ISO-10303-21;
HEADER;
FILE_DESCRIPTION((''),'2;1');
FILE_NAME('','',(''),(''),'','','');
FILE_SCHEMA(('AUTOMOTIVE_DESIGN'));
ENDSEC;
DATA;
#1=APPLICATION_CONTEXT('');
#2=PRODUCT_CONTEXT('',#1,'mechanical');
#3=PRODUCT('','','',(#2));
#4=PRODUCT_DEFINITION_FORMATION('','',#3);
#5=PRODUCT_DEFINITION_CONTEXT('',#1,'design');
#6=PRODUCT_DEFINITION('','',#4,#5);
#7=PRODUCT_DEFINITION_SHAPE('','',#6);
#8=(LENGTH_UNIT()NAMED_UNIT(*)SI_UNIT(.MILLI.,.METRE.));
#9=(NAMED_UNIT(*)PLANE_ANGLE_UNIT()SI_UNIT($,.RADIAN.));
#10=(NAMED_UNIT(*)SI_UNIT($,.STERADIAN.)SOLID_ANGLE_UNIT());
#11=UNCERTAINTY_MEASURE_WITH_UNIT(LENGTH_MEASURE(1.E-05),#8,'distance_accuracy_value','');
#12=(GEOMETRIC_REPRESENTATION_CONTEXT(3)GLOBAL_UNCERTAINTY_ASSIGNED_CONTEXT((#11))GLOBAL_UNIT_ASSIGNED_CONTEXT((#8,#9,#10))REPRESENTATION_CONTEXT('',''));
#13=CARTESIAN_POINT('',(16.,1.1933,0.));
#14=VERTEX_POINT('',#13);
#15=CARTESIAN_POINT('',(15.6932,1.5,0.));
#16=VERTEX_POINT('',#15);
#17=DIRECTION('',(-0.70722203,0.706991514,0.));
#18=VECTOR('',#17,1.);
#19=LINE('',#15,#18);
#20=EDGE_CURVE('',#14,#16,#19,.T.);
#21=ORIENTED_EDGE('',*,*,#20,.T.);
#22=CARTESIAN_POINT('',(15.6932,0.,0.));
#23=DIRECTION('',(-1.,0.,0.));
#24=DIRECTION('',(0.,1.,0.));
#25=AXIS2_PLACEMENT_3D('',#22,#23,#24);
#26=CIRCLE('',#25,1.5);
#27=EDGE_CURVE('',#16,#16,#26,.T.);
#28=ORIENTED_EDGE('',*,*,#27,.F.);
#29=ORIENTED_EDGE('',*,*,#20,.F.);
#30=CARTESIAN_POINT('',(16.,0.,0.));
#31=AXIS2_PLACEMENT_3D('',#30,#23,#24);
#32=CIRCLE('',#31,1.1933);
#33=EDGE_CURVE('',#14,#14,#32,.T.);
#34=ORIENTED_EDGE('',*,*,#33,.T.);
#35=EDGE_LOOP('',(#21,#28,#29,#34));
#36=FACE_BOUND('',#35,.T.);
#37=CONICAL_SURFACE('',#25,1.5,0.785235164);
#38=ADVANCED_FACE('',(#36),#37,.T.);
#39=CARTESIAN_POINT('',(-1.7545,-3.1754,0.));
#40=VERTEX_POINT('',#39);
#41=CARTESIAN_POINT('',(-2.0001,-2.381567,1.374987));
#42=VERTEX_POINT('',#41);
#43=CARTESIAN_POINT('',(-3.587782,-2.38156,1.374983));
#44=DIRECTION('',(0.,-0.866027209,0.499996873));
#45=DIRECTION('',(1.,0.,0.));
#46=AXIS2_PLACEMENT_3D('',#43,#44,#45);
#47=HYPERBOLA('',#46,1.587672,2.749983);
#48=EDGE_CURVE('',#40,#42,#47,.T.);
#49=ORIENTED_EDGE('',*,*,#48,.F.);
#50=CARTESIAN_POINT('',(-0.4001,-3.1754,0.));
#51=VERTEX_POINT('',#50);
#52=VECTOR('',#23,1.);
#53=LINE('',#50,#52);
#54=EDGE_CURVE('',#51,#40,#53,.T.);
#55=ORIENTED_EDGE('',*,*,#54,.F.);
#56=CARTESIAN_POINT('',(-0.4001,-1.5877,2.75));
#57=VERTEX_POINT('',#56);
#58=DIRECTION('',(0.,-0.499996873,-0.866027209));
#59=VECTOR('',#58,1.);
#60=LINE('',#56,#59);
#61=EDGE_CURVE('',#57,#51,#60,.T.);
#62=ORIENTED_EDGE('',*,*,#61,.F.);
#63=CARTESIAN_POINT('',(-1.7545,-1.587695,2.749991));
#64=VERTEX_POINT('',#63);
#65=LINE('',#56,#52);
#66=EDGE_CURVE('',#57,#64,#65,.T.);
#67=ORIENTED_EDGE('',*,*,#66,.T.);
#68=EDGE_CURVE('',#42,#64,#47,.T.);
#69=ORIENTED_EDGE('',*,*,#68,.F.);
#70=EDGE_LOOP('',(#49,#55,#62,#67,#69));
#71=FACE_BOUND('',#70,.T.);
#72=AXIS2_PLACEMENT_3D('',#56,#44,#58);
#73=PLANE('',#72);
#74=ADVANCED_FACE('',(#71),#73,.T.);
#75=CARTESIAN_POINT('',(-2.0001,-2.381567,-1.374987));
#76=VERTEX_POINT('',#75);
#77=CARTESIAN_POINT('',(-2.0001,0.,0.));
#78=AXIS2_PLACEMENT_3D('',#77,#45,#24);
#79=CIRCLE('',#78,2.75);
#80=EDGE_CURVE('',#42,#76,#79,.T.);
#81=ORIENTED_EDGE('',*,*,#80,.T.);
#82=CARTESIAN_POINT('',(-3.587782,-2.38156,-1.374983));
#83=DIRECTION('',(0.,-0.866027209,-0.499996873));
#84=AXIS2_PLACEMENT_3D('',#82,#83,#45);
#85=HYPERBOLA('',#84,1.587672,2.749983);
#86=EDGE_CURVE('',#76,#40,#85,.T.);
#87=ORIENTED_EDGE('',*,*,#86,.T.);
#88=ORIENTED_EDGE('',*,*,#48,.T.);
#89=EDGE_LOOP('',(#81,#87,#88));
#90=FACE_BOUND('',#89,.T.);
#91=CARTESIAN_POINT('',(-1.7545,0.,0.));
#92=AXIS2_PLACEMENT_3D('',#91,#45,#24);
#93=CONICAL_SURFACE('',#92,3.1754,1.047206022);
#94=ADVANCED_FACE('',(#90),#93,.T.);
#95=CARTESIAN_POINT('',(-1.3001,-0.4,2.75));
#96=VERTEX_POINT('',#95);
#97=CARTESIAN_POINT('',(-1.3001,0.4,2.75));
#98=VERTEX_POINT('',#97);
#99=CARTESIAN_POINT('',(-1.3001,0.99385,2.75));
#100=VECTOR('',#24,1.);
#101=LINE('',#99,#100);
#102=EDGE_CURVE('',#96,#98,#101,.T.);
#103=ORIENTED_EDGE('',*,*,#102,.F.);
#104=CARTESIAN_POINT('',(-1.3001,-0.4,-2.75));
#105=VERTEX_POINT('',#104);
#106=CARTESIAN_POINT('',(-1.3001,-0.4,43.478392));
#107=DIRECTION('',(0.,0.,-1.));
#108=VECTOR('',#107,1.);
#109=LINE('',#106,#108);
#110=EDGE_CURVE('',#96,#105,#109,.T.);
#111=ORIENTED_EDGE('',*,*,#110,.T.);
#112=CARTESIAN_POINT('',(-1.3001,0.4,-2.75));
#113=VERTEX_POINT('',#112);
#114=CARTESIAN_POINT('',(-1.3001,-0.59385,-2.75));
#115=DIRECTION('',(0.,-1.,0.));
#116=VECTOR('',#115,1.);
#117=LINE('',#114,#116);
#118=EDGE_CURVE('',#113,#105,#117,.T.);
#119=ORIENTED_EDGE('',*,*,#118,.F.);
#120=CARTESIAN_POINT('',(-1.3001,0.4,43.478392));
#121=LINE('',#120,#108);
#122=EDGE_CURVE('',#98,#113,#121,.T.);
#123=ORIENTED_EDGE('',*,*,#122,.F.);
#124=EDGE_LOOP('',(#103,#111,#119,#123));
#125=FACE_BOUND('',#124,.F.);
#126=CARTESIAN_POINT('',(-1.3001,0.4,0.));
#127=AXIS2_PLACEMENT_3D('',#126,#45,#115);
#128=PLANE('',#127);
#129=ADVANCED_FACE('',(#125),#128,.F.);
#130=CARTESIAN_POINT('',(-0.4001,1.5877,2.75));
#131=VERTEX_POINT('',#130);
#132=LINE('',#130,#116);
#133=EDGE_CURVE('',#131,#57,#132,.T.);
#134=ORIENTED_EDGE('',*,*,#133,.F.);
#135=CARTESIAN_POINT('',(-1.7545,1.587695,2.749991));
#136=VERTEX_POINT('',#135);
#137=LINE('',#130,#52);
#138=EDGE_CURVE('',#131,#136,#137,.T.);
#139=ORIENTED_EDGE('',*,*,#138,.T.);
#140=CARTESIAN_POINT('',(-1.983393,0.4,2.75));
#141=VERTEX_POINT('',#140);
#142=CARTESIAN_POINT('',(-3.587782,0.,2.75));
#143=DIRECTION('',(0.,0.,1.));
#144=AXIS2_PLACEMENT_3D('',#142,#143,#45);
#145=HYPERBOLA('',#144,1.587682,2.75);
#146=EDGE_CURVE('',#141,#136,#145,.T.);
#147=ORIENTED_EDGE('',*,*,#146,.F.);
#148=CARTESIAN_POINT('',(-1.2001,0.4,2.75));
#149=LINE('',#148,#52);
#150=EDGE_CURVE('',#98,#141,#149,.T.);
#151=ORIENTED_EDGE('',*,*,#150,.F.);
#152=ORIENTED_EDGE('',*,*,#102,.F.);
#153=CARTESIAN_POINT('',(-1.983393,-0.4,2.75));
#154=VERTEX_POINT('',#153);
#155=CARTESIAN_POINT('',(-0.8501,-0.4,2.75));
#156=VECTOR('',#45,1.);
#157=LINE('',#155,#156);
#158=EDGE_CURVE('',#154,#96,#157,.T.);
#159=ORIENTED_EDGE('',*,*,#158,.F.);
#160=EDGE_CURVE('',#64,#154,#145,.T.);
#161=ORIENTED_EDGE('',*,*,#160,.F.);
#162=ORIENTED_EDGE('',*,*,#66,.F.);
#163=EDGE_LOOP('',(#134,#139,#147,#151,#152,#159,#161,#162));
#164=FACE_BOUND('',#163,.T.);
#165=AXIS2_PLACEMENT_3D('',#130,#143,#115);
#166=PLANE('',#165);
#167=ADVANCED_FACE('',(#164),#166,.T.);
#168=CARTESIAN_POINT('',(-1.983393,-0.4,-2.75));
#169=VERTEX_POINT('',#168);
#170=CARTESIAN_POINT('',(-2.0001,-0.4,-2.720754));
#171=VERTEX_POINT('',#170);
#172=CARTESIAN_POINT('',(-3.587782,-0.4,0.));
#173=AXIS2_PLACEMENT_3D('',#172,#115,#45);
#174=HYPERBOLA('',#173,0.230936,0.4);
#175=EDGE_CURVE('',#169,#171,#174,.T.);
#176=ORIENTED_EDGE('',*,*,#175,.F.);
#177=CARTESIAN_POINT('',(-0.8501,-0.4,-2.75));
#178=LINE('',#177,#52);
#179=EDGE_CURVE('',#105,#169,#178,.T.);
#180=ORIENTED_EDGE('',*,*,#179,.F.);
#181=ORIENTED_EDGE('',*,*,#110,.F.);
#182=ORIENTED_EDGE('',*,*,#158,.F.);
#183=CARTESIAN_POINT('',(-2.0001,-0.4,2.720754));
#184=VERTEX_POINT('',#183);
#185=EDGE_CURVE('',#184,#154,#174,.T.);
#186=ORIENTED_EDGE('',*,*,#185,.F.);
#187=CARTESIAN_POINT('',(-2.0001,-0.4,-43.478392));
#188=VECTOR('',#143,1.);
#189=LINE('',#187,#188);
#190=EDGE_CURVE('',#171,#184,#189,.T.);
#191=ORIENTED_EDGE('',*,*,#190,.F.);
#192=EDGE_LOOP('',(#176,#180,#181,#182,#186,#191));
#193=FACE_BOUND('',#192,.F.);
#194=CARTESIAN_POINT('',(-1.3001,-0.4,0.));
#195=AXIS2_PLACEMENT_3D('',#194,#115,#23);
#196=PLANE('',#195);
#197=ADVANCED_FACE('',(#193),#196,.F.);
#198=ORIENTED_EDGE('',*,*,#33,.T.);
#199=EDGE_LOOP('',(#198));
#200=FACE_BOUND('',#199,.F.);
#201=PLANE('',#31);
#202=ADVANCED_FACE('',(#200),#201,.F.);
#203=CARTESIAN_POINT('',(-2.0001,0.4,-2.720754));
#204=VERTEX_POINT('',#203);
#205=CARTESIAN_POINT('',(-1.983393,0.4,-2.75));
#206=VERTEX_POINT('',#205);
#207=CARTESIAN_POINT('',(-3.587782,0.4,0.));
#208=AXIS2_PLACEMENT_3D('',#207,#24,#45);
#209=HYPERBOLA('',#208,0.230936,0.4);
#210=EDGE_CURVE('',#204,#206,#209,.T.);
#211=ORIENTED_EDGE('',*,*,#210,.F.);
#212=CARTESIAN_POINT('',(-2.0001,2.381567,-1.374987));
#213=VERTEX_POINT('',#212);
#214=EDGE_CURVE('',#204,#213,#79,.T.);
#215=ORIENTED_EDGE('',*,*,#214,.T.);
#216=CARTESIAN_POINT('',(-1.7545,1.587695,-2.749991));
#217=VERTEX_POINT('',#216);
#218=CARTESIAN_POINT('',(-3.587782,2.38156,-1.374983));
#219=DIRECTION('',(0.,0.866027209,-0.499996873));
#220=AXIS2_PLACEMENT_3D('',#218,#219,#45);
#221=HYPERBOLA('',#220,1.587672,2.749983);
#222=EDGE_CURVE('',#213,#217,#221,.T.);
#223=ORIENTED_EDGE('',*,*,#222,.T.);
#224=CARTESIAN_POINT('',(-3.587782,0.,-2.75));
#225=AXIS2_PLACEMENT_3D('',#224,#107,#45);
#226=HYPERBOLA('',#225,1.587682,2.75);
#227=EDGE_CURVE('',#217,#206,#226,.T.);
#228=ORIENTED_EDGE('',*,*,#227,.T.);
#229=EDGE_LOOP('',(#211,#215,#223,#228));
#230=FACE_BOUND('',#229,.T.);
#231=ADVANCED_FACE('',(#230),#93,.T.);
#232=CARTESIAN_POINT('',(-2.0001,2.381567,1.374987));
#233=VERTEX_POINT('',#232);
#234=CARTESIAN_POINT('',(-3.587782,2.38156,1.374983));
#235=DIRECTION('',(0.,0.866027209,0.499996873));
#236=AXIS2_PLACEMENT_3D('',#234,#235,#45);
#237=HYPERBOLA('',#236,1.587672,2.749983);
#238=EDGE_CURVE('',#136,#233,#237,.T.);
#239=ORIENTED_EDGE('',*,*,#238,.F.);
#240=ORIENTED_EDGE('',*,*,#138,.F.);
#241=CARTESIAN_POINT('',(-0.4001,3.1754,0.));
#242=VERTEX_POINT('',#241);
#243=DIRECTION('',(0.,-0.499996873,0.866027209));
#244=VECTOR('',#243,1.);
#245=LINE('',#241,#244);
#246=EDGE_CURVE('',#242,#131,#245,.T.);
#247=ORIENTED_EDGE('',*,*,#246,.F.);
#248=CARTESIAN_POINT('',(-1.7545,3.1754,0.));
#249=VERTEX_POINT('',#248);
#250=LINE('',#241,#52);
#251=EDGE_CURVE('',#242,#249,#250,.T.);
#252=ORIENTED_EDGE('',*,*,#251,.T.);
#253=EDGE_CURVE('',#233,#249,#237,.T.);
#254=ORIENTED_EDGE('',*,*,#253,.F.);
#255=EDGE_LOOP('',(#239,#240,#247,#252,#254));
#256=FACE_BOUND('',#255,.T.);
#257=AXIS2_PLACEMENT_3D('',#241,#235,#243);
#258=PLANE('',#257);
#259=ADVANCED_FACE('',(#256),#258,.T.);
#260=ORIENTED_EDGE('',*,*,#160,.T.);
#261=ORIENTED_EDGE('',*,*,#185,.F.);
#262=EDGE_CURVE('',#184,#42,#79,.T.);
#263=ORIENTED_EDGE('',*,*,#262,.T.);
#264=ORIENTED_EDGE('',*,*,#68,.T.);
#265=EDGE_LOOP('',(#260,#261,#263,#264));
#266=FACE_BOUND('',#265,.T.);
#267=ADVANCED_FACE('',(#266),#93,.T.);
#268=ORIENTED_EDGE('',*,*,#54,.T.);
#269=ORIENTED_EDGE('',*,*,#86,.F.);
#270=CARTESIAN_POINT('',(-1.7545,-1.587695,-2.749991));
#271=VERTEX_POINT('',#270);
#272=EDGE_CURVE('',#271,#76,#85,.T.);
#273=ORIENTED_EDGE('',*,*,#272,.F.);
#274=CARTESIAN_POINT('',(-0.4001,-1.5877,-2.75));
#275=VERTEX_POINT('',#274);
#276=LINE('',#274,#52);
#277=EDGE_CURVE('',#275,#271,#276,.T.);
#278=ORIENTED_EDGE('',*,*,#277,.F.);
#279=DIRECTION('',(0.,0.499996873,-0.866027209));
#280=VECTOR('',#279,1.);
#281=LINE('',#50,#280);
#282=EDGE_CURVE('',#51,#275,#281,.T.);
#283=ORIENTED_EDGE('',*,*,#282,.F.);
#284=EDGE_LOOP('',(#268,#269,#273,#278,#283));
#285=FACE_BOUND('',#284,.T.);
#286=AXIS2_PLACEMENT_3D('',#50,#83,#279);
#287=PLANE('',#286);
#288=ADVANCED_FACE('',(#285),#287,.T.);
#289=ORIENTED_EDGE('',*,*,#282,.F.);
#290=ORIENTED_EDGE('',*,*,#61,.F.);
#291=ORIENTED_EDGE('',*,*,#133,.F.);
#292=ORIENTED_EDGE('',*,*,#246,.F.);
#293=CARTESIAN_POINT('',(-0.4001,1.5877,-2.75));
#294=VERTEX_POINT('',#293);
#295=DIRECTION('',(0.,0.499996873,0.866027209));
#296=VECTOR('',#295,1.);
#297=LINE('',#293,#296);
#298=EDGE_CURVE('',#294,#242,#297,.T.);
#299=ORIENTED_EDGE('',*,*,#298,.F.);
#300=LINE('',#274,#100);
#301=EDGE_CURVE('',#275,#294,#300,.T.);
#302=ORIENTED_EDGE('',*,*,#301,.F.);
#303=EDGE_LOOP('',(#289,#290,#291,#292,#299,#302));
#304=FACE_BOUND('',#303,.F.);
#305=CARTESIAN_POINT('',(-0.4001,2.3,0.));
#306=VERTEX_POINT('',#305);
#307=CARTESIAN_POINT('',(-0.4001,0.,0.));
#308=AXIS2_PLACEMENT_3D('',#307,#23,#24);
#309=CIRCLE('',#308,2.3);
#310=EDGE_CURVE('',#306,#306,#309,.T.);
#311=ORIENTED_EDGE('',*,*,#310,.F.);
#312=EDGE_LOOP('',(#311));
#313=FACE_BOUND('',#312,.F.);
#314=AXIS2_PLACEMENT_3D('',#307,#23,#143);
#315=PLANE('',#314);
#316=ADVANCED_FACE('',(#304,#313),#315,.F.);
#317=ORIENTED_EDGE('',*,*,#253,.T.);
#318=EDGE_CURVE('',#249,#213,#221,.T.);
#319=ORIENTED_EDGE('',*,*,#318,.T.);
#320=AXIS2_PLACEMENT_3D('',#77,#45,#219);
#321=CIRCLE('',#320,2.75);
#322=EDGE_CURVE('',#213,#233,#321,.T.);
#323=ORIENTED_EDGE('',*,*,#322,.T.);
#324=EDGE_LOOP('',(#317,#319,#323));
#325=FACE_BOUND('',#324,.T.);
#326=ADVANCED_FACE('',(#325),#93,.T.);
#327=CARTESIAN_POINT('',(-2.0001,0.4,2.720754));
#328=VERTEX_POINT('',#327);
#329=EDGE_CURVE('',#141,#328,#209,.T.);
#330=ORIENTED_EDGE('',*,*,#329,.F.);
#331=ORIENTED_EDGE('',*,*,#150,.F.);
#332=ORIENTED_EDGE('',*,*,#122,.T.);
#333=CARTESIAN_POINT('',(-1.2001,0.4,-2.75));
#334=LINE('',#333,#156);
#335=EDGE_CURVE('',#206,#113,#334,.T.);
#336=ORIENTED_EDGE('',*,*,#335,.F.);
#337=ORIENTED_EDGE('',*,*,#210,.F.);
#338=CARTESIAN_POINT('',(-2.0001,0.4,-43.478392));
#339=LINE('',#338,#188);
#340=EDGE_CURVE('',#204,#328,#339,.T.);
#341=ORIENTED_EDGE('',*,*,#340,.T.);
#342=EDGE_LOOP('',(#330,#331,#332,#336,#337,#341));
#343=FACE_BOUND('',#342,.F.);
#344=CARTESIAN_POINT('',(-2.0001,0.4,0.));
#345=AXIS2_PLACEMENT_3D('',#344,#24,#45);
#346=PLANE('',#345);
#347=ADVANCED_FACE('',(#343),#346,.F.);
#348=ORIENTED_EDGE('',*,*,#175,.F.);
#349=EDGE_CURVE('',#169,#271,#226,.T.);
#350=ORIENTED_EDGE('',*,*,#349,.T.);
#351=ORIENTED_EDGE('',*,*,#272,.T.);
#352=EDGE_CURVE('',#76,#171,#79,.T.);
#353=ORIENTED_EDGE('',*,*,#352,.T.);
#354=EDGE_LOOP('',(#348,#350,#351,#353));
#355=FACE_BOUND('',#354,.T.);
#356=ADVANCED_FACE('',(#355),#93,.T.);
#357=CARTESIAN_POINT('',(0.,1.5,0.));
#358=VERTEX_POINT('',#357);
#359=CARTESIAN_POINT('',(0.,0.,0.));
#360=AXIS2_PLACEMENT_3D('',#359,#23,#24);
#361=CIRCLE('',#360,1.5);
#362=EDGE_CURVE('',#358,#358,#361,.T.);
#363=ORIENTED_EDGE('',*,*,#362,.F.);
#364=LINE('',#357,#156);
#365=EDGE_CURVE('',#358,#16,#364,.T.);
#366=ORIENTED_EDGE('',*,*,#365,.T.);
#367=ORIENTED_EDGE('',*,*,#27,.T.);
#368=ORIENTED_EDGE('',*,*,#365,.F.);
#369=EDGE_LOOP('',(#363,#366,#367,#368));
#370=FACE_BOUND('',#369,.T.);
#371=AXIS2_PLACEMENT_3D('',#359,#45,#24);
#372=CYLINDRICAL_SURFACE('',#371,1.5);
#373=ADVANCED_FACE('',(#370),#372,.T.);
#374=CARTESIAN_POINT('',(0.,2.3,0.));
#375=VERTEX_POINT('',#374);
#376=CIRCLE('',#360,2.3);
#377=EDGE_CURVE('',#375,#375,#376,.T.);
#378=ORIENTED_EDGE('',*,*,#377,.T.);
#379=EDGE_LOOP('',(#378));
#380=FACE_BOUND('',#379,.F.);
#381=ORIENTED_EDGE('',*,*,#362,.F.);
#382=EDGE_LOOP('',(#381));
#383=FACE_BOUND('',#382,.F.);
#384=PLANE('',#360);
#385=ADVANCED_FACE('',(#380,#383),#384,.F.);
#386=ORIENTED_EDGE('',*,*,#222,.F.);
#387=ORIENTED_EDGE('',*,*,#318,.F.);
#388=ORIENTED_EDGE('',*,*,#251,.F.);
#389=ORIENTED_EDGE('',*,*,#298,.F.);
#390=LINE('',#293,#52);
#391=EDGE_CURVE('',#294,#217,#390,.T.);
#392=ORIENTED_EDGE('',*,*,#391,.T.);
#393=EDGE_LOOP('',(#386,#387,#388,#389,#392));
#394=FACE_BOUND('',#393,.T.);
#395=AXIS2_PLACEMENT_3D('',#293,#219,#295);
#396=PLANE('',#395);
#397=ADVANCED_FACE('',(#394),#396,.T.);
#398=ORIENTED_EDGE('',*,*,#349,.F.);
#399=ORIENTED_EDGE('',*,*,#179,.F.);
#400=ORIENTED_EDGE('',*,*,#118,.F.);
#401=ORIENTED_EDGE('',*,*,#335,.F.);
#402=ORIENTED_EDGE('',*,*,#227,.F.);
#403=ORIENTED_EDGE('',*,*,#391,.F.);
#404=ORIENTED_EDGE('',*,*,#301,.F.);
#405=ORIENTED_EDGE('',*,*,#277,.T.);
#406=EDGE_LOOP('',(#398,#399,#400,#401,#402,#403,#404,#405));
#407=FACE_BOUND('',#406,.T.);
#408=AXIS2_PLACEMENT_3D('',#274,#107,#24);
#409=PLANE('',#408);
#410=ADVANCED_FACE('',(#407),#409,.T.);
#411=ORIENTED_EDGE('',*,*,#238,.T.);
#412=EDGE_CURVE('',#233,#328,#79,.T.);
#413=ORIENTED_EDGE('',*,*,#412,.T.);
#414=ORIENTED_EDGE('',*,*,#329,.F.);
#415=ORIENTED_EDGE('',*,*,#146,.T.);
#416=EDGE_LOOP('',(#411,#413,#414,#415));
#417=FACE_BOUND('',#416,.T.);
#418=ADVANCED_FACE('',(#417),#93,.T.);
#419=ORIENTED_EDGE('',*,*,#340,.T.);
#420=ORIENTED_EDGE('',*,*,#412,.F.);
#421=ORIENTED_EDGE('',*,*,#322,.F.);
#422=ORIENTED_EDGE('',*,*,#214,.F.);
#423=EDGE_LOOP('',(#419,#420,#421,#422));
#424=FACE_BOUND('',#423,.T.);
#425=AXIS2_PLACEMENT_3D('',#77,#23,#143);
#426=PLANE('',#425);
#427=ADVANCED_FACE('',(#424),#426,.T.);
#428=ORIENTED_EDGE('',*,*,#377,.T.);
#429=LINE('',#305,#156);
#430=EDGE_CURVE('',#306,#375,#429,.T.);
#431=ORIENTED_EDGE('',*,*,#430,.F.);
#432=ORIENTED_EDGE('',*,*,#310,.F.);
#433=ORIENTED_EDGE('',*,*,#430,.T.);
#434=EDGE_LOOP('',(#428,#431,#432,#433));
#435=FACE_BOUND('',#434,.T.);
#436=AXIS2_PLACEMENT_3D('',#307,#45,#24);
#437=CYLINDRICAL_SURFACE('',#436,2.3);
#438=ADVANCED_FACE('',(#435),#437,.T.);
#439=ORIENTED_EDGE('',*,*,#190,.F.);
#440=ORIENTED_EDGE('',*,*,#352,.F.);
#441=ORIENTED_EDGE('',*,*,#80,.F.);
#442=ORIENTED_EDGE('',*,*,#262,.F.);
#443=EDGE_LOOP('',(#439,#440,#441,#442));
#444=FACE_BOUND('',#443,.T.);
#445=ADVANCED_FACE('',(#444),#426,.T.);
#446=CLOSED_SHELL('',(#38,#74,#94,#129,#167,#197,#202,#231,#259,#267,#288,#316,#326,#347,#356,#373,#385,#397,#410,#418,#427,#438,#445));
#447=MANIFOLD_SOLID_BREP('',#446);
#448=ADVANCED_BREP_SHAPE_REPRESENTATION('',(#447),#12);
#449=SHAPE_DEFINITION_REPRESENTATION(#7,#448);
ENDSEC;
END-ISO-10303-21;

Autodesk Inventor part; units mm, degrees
ref_plane "YZ Plane" through (0, 0, 0) normal (1, 0, 0) x (0, 1, 0)
ref_plane "XZ Plane" through (0, 0, 0) normal (0, 1, 0) x (-1, 0, 0)
sketch "Sketch1" plane through (0, 0, 0) normal (0, 0, 1) x (1, 0, 0)
  line L0 (0, 2.3) -> (0, 1.5)
  line L1 (0, 1.5) -> (16, 1.5)
  line L2 (16, 1.5) -> (16, 0)
  line L3 (16, 0) -> (-0.4001, 0)
  line L4 (-3.6801, 0) -> (19.28, 0) projected
  line L5 (-0.4001, 0) -> (-0.4001, 2.3)
  line L6 (-0.4001, 2.3) -> (0, 2.3)
  line L7 (0, -0.46) -> (0, 2.76) projected
  dimension "d0" = 16
  dimension "d1" = 3
  dimension "d8" = 0.4001
  dimension "d9" = 4.6
revolve "Body" add sketch "Sketch1" angle 360 about axis through (16, 0, 0) along (-1, 0, 0)
sketch "Sketch2" plane through (-0.4001, 0, 0) normal (-1, 0, 0) x (0, 0, 1)
  line L0 (0, 3.1754) -> (2.75, 1.5877)
  line L1 (2.75, 1.5877) -> (2.75, -1.5877)
  line L2 (2.75, -1.5877) -> (0, -3.1754)
  line L3 (0, -3.1754) -> (-2.75, -1.5877)
  line L4 (-2.75, -1.5877) -> (-2.75, 1.5877)
  line L5 (-2.75, 1.5877) -> (0, 3.1754)
  point P0 (0, 0)
  point P1 (0, 0)
  dimension "d10" = 5.5
extrude "Head" add sketch "Sketch2" along normal blind 1.6
sketch "Sketch3" plane through (0, 0, 0) normal (0, 0, 1) x (1, 0, 0)
  line L0 (-2.0001, 0.4) -> (-1.3001, 0.4)
  line L1 (-1.3001, 0.4) -> (-1.3001, -0.4)
  line L2 (-1.3001, -0.4) -> (-2.0001, -0.4)
  line L3 (-2.0001, -0.4) -> (-2.0001, 0.4)
  line L4 (-1.3001, 0) -> (-2.0001, 0) construction
  line L5 (-2.1401, 0) -> (-1.1601, 0) projected
  line L6 (-2.0001, 1.5877) -> (-2.0001, -1.5877) projected
  dimension "d11" = 0.8
  dimension "d13" = 0.7
extrude "Slot" cut sketch "Sketch3" along normal through all both and the other way through all
sketch "Sketch4" plane through (0, 0, 0) normal (0, 0, 1) x (1, 0, 0)
  line L0 (-2.0001, 2.75) -> (-2.0001, 3.1754)
  line L1 (-2.0001, 3.1754) -> (-1.7545, 3.1754)
  line L2 (-1.7545, 3.1754) -> (-2.0001, 2.75)
  line L3 (-1.7545, 3.1754) -> (-2.0001, 3.1754)
  line L4 (-2.0001, 3.1754) -> (-2.0001, 2.75)
  line L5 (-2.0001, 3.1754) -> (-2.0001, 1.5877) projected
  line L6 (-2.3201, 0) -> (-0.0801, 0) projected
  line L7 (-0.4001, 3.1754) -> (-2.0001, 3.1754) projected
  dimension "d4" = 30
  dimension "d17" = 5.5
revolve "Chamfer1" cut sketch "Sketch4" angle 360 about axis through (-10, 0, 0) along (1, 0, 0)
thread "Thread" size "M3x0.5" designation "M3" class "6g" standard "GB Metric profile" length 15.5
chamfer "Chamfer2" distance 0.3067 distance2 0.3068 1 edges at (16, -1.5, 0) measured on face at (16, -0.3888, -0.2119)
ref_plane "Work Plane1" through (60, 0, 0) normal (0, 0, 1) x (1, 0, 0)
equation "\"d0\" = NLG"
equation "\"d1\" = GD"
equation "\"d9\" = SD2"
equation "\"d10\" = SW"
equation "\"d2\" = KOH - SD"
equation "\"d11\" = SBR"
equation "\"d13\" = STI"
equation "\"d4\" = ANG1"
equation "\"d17\" = SW0"
equation "\"d15\" = GEL"
equation "\"d5\" = -0.5 * SPD + 0.5 * GD"
equation "\"NLG\" = 16"
equation "\"GD\" = NND"
equation "\"KOH\" = 2"
equation "\"GEL\" = 15.5"
equation "\"SW\" = 5.5"
equation "\"SW0\" = SW"
equation "\"SPD\" = NND - 1.2269 * PTC"
equation "\"SD2\" = SDH"
equation "\"SD\" = WFT"
equation "\"ANG1\" = 30deg"
equation "\"GUL\" = 0.61345 * PTC"
equation "\"STI\" = 0.7"
equation "\"SBR\" = 0.8"
equation "\"RR\" = 0.1"
equation "\"GAL\" = 0.61345 * PTC"
equation "\"BDM\" = NND"
equation "\"WFT\" = 0.4"
equation "\"FAWI\" = 45deg"
equation "\"PTC\" = 0.5"
equation "\"THREADDIA\" = 3"
equation "\"E0\" = 1.155 * SW"
equation "\"TOA\" = 30deg"
equation "\"NND\" = 3"
equation "\"GD1\" = THREADDIA - 1.2269 * PTC"
equation "\"SDH\" = 4.6"
properties part number "Bolt GB 29.1 M3 x 16" material "Acero, suave"
